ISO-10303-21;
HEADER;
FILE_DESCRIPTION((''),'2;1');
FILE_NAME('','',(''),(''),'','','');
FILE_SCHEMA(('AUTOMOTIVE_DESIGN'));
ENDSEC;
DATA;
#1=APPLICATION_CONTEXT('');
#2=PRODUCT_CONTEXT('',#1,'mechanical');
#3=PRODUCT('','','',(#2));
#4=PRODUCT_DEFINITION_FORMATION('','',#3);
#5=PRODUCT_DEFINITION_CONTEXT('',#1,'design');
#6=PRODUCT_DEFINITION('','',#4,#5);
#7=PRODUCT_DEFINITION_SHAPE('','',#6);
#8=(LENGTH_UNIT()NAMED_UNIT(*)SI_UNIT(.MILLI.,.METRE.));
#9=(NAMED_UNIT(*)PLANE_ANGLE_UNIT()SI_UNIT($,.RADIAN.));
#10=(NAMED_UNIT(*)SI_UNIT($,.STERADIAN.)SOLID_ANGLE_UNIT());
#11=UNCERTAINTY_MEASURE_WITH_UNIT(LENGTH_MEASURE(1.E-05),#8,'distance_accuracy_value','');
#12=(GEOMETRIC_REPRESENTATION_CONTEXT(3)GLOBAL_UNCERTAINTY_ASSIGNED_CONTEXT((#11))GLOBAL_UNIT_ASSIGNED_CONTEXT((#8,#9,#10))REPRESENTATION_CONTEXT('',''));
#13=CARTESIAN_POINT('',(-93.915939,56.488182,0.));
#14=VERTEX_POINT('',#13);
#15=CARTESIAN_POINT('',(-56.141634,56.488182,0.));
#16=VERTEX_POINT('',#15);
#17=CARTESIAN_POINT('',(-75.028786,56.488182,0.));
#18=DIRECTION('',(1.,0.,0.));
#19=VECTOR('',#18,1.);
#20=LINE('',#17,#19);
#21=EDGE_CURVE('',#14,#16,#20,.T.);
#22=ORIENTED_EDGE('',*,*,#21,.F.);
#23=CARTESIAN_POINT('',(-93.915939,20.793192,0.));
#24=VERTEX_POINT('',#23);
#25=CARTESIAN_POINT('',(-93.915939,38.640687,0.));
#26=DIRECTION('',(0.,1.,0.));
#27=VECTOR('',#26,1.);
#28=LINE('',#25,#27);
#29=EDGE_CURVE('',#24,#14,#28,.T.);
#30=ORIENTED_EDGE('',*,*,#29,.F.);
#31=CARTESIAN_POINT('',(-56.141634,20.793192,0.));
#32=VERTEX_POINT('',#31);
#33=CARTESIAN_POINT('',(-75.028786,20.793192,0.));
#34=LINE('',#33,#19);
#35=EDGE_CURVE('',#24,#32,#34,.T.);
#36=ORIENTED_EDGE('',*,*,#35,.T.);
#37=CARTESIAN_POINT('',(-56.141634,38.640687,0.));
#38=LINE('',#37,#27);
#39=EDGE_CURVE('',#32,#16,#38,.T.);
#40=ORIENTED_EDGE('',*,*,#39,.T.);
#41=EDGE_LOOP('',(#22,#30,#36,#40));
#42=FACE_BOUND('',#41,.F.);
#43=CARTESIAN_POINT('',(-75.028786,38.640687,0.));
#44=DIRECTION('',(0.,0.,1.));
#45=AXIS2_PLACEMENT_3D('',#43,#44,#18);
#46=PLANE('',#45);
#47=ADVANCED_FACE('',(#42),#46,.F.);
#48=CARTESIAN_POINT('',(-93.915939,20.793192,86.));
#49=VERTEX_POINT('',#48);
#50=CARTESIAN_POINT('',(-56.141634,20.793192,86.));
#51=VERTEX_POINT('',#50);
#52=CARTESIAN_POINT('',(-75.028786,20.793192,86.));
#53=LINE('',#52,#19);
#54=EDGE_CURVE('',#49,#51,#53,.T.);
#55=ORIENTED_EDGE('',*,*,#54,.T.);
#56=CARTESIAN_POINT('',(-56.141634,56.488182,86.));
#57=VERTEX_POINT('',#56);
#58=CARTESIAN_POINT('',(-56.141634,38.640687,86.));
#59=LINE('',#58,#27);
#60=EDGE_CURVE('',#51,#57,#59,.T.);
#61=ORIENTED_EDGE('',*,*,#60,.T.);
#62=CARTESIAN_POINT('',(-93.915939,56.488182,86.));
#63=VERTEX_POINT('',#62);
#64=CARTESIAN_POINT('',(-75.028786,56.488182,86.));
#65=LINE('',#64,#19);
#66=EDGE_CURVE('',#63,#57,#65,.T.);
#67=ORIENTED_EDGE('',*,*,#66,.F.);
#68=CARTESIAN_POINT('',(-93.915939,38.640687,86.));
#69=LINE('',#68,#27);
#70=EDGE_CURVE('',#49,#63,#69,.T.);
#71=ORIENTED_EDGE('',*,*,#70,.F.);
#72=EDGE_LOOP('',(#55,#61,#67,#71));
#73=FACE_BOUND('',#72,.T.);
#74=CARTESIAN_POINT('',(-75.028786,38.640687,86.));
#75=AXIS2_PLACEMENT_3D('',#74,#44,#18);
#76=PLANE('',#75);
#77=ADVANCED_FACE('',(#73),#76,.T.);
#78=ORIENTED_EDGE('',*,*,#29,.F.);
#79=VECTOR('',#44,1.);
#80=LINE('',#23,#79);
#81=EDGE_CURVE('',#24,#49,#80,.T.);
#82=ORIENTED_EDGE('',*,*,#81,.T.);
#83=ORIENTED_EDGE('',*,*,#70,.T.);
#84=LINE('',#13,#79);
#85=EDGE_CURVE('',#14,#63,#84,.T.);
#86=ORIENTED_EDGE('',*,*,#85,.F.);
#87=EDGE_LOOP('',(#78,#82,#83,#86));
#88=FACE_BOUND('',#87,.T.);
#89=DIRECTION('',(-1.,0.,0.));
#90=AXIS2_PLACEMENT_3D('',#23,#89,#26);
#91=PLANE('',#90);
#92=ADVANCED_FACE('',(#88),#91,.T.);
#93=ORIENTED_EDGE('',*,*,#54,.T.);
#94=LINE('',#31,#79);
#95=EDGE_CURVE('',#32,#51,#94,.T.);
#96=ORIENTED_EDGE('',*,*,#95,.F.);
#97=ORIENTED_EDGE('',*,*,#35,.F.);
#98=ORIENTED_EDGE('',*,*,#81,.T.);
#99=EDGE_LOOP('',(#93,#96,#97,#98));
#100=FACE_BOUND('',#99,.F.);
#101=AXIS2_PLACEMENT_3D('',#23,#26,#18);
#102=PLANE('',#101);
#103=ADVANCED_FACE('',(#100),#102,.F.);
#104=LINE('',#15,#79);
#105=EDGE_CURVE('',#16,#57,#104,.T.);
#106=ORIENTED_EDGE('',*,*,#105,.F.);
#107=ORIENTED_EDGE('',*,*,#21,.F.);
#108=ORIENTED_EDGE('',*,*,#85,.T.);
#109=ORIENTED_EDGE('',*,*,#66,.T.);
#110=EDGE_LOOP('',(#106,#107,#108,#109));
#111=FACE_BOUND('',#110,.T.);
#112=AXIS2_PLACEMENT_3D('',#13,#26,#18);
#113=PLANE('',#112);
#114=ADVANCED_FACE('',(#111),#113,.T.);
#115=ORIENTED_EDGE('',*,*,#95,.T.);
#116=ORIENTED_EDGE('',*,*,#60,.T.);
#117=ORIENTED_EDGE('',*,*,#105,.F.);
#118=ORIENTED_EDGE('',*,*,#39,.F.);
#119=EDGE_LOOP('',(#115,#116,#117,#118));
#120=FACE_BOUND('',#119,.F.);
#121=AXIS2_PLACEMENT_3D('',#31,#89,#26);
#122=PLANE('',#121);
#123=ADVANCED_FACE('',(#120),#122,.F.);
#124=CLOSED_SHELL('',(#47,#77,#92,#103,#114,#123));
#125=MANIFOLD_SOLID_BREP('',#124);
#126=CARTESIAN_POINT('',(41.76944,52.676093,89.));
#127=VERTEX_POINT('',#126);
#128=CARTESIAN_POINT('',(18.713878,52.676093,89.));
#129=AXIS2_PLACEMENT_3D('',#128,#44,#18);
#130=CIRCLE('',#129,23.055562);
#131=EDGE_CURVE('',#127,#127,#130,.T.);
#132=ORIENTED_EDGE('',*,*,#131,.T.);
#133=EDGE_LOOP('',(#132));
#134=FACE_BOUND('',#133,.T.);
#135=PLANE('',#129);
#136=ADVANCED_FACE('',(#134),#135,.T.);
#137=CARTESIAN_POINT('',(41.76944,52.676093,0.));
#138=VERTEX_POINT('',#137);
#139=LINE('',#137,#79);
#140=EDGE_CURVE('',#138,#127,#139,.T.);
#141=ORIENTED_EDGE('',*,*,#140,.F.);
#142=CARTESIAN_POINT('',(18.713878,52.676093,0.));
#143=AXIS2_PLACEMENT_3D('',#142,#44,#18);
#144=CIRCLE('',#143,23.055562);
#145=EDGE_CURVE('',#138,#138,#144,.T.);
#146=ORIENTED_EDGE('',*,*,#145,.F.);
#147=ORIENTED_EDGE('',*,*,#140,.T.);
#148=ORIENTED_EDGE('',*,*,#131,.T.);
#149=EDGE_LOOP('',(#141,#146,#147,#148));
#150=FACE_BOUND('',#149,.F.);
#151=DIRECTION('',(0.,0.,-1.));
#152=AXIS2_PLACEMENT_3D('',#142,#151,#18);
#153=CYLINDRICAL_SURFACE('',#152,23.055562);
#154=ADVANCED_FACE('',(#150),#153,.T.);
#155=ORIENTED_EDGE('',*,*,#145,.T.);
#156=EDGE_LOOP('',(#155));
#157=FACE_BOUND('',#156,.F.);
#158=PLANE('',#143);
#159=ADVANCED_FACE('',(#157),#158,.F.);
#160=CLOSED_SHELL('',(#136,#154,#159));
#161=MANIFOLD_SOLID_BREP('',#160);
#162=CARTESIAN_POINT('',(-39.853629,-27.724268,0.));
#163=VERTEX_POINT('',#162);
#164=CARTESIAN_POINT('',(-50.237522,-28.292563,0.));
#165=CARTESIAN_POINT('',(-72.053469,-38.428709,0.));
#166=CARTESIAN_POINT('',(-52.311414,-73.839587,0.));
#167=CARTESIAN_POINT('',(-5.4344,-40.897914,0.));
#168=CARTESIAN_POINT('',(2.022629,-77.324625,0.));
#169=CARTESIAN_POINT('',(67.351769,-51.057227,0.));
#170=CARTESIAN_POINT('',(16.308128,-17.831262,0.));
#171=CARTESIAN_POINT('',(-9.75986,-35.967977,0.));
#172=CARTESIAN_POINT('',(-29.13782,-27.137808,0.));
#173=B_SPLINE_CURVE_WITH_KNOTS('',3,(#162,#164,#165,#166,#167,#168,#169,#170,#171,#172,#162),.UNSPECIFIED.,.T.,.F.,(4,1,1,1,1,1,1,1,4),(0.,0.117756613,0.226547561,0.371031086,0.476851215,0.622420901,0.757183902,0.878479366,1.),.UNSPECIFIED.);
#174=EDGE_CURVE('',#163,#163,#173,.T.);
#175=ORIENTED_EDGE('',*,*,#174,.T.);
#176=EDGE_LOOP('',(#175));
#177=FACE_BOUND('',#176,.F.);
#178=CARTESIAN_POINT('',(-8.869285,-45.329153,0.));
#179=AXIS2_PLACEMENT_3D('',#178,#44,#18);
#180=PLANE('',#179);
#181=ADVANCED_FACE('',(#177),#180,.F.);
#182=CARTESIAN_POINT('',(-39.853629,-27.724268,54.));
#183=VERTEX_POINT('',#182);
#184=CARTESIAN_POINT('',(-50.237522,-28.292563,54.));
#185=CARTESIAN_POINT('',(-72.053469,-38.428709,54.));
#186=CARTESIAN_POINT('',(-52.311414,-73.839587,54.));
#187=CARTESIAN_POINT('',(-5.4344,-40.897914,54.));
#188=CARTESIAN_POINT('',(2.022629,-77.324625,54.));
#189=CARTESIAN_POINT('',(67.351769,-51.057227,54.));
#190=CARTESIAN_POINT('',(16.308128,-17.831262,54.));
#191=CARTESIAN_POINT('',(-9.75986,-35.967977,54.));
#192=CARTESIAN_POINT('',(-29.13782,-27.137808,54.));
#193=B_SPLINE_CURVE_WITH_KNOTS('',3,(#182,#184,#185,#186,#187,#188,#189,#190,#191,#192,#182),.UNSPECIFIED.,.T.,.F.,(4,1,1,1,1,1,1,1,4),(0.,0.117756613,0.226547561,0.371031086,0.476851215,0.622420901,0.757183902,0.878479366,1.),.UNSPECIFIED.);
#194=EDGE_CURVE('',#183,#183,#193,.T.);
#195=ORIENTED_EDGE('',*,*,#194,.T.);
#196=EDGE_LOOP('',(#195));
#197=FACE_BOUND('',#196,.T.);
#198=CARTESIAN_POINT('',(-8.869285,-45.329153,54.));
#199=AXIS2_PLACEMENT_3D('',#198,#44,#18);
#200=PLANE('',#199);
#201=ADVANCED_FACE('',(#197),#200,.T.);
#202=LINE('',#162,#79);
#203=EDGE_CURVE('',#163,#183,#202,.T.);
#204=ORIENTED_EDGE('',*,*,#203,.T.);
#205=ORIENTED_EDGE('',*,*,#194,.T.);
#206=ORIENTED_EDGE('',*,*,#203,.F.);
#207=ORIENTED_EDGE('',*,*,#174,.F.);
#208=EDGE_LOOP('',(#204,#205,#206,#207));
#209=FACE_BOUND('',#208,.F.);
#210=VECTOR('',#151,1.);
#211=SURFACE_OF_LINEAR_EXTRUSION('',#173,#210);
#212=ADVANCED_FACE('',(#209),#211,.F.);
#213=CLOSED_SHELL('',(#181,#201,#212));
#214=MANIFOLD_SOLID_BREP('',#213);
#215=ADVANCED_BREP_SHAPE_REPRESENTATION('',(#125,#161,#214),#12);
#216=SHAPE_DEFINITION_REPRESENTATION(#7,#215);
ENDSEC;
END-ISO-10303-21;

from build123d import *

# Parameters (mm, degrees)
F1_DEPTH = 54
F0_R     = 23.0555619828
F2_DEPTH = 89
F0_W     = 37.7743057907
F0_H     = 35.6949903071
F3_DEPTH = 86


# Not quite as in the source:
# - the program builds the solid bodies; features that only make, move or delete a surface that nothing else refers to are left out


with BuildPart() as f1:
    # F0 (on Top) → F1 (new body)
    with BuildSketch(Plane.XY):
        with BuildLine():
            add(Edge.make_bspline(
                [(-39.8536287248, -27.7242679149), (-50.2375219072, -28.2925626406), (-72.053468967, -38.4287091274), (-52.3114138524, -73.8395869052), (-5.4344000682, -40.8979144482), (2.0226294599, -77.3246249013), (67.3517685782, -51.0572269021), (16.3081275338, -17.8312624321), (-9.7598597024, -35.967977136), (-29.1378204925, -27.1378079818), (-39.8536287248, -27.7242679149)],
                knots=[0, 0, 0, 0, 0.1177566126, 0.2265475614, 0.3710310856, 0.4768512147, 0.6224209007, 0.7571839019, 0.8784793664, 1, 1, 1, 1], degree=3))
        make_face()
    extrude(amount=F1_DEPTH)


with BuildPart() as f2:
    # F0 (on Top) → F2 (new body)
    with BuildSketch(Plane.XY):
        with Locations((18.7138784677, 52.6760928333)):
            Circle(F0_R)
    extrude(amount=F2_DEPTH)


with BuildPart() as f3:
    # F0 (on Top) → F3 (new body)
    with BuildSketch(Plane.XY):
        with Locations((-75.0287864357, 38.6406872422)):
            Rectangle(F0_W, F0_H)
    extrude(amount=F3_DEPTH)


solid = Compound([f1.part, f2.part, f3.part])
